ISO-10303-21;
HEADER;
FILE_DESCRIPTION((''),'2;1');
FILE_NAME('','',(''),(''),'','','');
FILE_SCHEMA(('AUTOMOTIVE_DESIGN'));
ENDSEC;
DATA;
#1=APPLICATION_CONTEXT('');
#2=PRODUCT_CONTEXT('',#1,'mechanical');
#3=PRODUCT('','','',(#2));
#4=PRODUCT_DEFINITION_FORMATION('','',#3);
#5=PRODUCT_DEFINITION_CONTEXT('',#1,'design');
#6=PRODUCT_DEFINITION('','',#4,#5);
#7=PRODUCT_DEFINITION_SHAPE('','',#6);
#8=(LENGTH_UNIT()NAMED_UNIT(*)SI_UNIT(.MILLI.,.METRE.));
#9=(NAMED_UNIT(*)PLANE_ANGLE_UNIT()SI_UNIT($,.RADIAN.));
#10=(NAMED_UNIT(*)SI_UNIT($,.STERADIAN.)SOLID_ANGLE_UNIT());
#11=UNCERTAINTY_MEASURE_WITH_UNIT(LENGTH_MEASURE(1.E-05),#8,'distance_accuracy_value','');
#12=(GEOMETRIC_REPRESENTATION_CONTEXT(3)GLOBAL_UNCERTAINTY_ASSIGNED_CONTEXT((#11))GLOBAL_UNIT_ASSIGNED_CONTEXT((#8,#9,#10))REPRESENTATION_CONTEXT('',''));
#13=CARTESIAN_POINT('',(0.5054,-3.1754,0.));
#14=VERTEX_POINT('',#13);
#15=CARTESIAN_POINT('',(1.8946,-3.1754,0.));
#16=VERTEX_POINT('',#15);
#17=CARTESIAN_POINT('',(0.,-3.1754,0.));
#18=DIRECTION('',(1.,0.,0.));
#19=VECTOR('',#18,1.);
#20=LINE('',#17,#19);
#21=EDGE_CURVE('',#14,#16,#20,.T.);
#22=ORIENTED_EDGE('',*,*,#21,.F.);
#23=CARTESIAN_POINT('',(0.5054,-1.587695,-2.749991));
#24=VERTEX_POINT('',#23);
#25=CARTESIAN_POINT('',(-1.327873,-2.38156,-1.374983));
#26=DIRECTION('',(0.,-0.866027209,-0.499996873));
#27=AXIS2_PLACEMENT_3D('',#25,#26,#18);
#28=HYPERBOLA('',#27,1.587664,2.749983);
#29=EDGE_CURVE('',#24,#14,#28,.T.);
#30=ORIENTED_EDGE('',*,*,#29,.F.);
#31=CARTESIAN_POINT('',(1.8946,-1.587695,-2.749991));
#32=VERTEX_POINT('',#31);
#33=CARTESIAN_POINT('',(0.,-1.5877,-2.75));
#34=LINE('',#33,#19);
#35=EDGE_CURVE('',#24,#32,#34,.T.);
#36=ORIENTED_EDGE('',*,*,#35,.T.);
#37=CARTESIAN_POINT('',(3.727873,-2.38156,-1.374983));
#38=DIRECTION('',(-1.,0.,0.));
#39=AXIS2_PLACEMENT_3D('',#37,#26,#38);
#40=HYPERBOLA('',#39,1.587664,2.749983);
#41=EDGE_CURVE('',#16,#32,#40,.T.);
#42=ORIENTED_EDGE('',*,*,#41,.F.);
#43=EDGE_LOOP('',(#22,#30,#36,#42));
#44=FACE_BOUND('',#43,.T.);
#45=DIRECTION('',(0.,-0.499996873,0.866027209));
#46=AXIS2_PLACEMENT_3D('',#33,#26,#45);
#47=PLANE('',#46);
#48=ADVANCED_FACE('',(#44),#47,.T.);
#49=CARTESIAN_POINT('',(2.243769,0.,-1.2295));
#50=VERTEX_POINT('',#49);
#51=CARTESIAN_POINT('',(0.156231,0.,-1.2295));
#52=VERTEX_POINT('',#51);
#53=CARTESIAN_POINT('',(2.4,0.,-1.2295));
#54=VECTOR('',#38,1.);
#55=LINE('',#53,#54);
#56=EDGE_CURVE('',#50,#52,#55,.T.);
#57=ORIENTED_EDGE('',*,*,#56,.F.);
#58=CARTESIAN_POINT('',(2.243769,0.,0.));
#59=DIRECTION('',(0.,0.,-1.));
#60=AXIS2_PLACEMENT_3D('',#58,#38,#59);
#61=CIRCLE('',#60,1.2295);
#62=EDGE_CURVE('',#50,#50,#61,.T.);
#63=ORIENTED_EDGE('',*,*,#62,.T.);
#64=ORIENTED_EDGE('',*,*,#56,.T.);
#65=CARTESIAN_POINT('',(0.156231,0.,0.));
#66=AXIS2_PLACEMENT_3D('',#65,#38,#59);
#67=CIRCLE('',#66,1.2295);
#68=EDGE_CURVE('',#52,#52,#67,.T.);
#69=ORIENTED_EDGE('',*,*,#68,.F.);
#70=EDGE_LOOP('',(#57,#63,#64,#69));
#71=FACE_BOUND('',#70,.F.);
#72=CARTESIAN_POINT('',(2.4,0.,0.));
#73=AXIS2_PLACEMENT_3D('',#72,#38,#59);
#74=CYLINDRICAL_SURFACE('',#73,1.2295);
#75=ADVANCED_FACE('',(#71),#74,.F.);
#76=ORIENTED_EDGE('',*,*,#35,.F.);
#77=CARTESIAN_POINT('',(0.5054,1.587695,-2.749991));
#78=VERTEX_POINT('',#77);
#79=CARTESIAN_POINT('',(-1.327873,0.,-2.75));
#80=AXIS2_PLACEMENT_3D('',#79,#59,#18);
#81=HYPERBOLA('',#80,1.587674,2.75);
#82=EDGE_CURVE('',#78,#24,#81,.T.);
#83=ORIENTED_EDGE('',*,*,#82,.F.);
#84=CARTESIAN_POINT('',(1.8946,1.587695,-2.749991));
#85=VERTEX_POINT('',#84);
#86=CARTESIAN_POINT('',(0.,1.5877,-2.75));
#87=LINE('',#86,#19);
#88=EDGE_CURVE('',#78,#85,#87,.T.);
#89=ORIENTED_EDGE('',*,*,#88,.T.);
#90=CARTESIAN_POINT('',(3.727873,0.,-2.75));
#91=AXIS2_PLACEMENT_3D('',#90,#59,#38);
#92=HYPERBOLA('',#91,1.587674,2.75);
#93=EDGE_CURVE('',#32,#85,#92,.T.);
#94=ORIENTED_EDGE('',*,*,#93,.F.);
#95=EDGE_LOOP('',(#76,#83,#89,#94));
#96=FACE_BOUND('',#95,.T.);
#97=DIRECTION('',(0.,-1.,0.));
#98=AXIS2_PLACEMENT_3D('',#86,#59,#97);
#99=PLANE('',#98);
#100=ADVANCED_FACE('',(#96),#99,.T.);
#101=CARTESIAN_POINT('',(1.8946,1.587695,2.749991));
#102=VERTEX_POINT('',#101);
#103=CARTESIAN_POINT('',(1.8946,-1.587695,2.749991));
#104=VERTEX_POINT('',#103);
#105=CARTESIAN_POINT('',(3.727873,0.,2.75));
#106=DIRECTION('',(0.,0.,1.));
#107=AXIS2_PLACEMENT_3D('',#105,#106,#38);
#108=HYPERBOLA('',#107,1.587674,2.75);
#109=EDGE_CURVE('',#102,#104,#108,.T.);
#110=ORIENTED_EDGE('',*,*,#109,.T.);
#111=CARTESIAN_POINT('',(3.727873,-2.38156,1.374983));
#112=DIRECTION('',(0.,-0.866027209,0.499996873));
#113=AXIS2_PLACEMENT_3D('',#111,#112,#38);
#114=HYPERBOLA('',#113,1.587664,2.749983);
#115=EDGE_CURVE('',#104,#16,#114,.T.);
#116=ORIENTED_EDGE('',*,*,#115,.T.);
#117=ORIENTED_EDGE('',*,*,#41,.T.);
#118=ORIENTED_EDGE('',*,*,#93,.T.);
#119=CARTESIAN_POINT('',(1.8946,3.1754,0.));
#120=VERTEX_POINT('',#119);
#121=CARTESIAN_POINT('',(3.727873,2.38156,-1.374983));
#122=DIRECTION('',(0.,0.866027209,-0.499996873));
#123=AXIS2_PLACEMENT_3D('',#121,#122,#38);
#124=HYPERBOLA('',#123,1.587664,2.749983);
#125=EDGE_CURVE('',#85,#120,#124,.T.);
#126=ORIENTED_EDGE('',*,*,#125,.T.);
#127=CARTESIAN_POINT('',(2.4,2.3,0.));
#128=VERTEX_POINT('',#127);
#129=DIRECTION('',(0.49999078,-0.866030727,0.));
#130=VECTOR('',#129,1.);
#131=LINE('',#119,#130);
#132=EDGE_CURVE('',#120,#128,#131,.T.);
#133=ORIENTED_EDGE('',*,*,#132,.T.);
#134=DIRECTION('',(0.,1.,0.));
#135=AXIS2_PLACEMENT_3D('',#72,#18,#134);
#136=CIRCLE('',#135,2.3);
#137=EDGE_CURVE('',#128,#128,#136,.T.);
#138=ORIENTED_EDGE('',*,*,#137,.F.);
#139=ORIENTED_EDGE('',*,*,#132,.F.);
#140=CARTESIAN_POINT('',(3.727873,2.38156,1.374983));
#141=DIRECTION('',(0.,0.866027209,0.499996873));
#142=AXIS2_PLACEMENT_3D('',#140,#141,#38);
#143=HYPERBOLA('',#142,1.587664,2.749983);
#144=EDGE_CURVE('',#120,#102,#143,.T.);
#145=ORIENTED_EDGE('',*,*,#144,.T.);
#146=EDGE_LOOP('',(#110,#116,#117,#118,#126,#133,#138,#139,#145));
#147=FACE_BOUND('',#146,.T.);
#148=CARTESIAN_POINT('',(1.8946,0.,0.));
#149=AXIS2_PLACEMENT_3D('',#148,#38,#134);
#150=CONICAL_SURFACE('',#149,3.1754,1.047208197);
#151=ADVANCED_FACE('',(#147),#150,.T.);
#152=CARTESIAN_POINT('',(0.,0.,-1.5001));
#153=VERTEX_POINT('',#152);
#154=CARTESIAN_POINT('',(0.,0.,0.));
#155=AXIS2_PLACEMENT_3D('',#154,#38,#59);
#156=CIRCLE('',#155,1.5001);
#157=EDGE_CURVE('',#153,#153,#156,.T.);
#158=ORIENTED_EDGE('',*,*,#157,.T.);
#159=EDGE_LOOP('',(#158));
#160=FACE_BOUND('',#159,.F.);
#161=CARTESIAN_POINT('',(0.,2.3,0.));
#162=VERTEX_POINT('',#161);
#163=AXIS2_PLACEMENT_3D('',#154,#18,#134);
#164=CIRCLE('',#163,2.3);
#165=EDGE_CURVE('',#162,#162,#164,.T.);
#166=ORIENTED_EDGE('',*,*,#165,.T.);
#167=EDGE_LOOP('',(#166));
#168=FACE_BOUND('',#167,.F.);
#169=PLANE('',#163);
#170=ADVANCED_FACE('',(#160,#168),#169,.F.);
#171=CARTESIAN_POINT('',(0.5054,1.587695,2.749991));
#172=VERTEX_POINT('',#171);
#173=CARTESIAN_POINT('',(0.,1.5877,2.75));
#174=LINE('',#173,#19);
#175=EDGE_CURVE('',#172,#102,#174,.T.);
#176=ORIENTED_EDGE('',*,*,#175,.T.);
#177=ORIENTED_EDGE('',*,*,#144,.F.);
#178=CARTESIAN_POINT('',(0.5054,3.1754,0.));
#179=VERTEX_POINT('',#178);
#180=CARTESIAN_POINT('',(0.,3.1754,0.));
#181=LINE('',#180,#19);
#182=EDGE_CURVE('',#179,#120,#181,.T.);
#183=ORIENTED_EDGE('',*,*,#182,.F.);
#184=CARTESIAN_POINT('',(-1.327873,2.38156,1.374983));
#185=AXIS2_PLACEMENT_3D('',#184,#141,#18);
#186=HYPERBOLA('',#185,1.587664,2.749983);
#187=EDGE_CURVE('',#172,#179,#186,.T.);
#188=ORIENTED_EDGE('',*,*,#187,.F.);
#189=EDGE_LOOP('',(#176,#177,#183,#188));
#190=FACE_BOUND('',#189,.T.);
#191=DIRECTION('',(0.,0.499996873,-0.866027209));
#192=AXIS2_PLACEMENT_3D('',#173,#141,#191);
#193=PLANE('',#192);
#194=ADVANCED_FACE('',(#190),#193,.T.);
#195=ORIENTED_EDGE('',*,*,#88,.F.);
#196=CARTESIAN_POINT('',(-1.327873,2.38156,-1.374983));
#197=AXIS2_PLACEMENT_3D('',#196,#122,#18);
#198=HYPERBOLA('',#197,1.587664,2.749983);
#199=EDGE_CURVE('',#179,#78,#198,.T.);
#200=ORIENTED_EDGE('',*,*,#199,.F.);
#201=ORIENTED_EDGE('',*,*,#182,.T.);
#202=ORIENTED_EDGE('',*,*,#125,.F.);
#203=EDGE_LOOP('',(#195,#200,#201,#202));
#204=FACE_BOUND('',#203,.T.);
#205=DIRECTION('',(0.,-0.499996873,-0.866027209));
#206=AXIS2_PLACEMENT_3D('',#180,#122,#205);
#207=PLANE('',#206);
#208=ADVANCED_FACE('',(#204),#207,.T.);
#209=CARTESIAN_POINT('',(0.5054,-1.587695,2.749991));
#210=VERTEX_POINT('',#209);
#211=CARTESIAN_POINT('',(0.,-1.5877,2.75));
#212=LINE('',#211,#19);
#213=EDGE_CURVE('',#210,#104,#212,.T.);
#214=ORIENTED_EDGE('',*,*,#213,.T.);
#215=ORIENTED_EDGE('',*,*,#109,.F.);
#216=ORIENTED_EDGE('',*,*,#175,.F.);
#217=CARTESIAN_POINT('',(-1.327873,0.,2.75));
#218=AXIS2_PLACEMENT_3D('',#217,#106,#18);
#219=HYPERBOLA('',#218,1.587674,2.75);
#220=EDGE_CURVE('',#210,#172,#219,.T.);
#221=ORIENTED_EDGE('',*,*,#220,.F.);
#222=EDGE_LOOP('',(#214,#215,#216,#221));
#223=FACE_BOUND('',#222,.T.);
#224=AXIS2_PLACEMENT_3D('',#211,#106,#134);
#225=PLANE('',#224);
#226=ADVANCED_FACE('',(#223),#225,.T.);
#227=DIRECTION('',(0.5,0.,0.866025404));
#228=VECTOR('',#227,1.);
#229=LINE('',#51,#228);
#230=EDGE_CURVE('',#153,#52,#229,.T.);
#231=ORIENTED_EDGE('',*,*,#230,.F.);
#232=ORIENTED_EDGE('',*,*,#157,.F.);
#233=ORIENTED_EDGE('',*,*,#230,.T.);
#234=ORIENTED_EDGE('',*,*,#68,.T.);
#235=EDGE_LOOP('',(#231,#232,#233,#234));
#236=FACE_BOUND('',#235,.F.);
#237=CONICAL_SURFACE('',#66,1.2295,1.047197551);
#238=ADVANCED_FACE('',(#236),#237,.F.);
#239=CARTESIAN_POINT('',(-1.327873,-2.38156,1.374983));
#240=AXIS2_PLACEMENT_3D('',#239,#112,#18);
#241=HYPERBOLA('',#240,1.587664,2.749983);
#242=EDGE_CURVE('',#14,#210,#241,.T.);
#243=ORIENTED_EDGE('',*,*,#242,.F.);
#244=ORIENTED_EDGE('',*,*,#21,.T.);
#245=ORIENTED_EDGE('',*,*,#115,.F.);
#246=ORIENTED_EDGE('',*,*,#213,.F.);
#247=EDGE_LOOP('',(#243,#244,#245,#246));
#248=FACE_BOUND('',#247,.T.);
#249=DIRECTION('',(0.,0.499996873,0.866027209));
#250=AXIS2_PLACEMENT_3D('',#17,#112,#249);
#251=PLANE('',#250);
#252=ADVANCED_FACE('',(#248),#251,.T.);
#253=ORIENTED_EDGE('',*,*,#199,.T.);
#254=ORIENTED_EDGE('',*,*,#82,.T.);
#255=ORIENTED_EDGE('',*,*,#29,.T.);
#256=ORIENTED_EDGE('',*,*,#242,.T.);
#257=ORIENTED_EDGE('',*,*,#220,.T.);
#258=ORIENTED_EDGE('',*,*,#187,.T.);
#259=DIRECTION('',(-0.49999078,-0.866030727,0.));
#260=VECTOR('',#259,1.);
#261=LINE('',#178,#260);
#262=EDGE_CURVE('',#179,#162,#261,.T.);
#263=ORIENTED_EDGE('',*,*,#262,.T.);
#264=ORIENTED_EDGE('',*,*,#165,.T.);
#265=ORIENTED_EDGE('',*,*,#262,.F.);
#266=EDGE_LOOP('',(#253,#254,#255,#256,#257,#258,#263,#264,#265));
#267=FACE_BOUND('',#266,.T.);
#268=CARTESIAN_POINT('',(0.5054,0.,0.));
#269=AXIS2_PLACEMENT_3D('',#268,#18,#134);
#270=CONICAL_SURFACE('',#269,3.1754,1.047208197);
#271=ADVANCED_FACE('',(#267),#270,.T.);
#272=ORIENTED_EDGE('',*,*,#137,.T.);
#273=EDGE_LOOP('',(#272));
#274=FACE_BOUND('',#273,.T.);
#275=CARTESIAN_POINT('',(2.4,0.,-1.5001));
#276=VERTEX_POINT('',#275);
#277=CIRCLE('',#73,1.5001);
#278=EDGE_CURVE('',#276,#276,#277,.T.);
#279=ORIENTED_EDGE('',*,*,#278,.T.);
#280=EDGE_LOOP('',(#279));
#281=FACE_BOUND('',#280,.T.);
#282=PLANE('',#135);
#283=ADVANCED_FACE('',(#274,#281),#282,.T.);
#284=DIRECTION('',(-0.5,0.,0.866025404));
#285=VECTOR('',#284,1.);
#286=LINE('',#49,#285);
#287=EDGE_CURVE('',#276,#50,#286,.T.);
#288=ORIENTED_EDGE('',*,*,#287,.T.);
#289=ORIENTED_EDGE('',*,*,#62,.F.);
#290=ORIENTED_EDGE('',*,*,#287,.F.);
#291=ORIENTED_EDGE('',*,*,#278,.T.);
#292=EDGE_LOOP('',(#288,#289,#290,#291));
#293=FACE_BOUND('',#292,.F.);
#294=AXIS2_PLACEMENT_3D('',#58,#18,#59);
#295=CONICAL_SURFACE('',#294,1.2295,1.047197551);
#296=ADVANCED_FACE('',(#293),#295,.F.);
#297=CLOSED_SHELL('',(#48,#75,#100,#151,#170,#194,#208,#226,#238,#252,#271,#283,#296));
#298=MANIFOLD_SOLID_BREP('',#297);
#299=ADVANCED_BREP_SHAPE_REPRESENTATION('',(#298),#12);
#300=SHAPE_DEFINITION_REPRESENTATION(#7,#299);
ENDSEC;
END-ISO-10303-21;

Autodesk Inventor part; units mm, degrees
ref_plane "YZ Plane" through (0, 0, 0) normal (1, 0, 0) x (0, 1, 0)
ref_plane "XZ Plane" through (0, 0, 0) normal (0, 1, 0) x (-1, 0, 0)
sketch "Sketch1" plane through (0, 0, 0) normal (1, 0, 0) x (0, 1, 0)
  line L0 (-3.1754, 0) -> (-1.5877, 2.75)
  line L1 (-1.5877, 2.75) -> (1.5877, 2.75)
  line L2 (1.5877, 2.75) -> (3.1754, 0)
  line L3 (3.1754, 0) -> (1.5877, -2.75)
  line L4 (1.5877, -2.75) -> (-1.5877, -2.75)
  line L5 (-1.5877, -2.75) -> (-3.1754, 0)
  point P0 (0, 0)
  point P1 (0, 0)
  dimension "d0" = 6.3509
extrude "Body" add sketch "Sketch1" along normal blind 2.4
sketch "Sketch2" plane through (0, 0, 0) normal (0, 0, 1) x (1, 0, 0)
  line L0 (0, 1.5877) -> (0, 3.1754) projected
  line L1 (0, 3.1754) -> (2.4, 3.1754) projected
  line L2 (2.4, 1.5877) -> (2.4, 3.1754) projected
  line L3 (-0.48, 0) -> (2.88, 0) projected
  line L4 (0.5054, 3.1754) -> (0, 2.3)
  line L5 (1.8946, 3.1754) -> (2.4, 2.3)
  dimension "d3" = 30
  dimension "d4" = 30
  dimension "d5" = 4.6
  dimension "d6" = 4.6
revolve "Chamfer1" cut sketch "Sketch2" angle 360 about axis through (-10, 0, 0) along (1, 0, 0)
sketch "Sketch3" plane through (2.4, 0, 0) normal (1, 0, 0) x (0, 0, -1)
  arc A0 (-0.625, -1.0825) -> (0.625, -1.0825) centre (0, 0) ccw projected
hole "Thread" at (2.4, 0, 0) direction (-1, 0, 0) diameter 2.459 end through all thread size "M3x0.5" class "6H" standard "ISO Metric profile"
chamfer "Chamfer2" distance 0.2706 angle 30 1 edges at (2.4, 0, 1.2295) measured on face at (2.4, 1.9179, -0.2329)
chamfer "Chamfer3" distance 0.2706 angle 30 1 edges at (0, 0, 1.2295) measured on face at (0, 1.9179, -0.2329)
ref_plane "Work Plane1" through (-6.3375, 0, 0) normal (0, -0.8660254, -0.5) x (1, 0, 0)
equation "\"d0\" = 1.1547 * SW"
equation "\"d1\" = KOH"
equation "\"d3\" = ANG1"
equation "\"d4\" = ANG2"
equation "\"d5\" = SW0"
equation "\"d6\" = SW01"
equation "\"d8\" = -0.5 * GD1 + 0.5 * NND"
equation "\"d40\" = -0.5 * GD1 + 0.5 * NND"
equation "\"d10\" = -0.5 * GD1 + 0.5 * NND"
equation "\"d41\" = -0.5 * GD1 + 0.5 * NND"
equation "\"ANG1\" = 30deg"
equation "\"ANG2\" = 30deg"
equation "\"NND\" = 3"
equation "\"KOH\" = 2.4"
equation "\"SW\" = 5.5"
equation "\"SW0\" = 4.6"
equation "\"SW01\" = SW0"
equation "\"GUL\" = 0.541266 * PTC"
equation "\"THREADDIA\" = 3"
equation "\"TOA\" = 30deg"
equation "\"PTC\" = 0.5"
equation "\"E0\" = 1.155 * SW"
equation "\"GAL\" = 0.541266 * PTC"
equation "\"GD1\" = 2.458734"
properties part number "ISO 4032 - M3" material "ステンレス鋼 440C"
